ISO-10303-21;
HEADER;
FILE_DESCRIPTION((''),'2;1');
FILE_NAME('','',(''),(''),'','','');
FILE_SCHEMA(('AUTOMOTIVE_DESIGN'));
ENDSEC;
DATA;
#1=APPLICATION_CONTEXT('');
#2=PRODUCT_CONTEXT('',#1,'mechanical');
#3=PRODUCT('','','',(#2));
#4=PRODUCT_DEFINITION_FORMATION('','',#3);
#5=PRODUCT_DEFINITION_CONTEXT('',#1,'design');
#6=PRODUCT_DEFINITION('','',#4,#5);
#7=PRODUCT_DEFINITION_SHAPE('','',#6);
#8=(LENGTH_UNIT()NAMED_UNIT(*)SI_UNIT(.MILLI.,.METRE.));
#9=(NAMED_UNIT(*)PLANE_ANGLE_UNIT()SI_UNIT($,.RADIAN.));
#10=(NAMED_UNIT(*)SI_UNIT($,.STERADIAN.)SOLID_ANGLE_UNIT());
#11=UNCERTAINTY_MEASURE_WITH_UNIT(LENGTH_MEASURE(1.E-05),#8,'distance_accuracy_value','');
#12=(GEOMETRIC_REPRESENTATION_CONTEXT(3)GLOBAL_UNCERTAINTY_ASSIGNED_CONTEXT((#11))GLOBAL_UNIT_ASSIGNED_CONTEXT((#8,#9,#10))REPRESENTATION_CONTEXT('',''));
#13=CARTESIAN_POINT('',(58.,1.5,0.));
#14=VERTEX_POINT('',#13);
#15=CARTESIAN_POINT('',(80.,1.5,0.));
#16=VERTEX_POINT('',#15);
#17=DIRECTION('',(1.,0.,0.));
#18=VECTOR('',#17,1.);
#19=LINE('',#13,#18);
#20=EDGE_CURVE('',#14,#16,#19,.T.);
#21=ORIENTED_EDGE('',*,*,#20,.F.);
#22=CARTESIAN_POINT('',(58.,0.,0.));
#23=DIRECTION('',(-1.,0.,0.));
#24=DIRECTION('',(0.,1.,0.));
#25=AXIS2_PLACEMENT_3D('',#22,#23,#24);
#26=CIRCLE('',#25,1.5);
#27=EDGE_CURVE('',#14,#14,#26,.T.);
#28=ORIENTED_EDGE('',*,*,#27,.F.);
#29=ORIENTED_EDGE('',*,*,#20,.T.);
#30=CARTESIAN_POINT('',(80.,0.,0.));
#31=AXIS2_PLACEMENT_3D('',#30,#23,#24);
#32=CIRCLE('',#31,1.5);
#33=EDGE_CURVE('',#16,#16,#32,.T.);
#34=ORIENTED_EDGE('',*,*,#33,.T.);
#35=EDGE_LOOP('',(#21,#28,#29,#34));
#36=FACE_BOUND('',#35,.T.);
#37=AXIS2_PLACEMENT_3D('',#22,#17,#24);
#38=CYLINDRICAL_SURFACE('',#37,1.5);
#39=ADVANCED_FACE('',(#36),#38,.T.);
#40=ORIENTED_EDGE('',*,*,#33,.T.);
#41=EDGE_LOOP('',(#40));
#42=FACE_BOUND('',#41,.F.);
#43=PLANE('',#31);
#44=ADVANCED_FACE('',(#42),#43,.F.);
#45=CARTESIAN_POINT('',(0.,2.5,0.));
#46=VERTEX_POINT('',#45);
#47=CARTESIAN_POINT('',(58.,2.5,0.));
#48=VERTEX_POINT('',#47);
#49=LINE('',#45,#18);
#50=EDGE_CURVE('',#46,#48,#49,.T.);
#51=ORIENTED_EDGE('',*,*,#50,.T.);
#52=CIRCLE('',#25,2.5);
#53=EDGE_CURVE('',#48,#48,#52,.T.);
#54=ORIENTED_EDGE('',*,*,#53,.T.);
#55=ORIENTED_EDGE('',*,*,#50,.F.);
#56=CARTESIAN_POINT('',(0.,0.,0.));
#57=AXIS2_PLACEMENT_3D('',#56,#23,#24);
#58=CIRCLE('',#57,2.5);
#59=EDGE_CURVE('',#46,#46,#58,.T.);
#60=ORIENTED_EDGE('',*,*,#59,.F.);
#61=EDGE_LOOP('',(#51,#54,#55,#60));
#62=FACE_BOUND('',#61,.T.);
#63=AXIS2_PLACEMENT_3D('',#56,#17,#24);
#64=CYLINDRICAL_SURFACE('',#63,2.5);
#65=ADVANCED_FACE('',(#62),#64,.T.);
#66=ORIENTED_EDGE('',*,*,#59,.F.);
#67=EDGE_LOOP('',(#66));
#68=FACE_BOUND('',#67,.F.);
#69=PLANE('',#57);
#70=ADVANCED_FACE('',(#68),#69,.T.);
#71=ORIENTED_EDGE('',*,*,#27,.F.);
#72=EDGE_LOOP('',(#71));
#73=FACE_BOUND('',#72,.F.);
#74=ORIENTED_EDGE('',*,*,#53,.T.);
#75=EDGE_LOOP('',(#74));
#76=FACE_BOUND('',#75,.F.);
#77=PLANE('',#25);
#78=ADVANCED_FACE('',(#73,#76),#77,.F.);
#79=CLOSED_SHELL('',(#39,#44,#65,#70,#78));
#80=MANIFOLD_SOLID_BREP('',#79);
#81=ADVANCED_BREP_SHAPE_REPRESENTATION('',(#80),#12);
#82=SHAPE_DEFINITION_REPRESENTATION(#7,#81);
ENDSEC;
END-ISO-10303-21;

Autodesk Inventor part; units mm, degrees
ref_plane "YZ Plane" through (0, 0, 0) normal (1, 0, 0) x (0, 1, 0)
ref_plane "XZ Plane" through (0, 0, 0) normal (0, 1, 0) x (-1, 0, 0)
ref_plane "XY Plane" through (0, 0, 0) normal (0, 0, 1) x (1, 0, 0)
sketch "Sketch1" plane through (0, 0, 0) normal (0, 0, 1) x (1, 0, 0)
  line L0 (0, 0) -> (0, 2.5)
  line L1 (0, 2.5) -> (58, 2.5)
  line L2 (58, 2.5) -> (58, 1.5)
  line L3 (58, 1.5) -> (80, 1.5)
  line L4 (80, 1.5) -> (80, 0)
  line L5 (80, 0) -> (0, 0)
  dimension "d0" = 58
  dimension "d1" = 22
  dimension "d2" = 3
  dimension "d3" = 5
revolve "Revolution1" add sketch "Sketch1" angle 360 about axis through (80, 0, 0) along (-1, 0, 0)
thread "Thread1" size "M3x0.5" class "6g" standard "ISO Metric profile" length 22
thread "Thread2" size "M5x0.8" class "6g" standard "ISO Metric profile" length 10
properties part number "19"
